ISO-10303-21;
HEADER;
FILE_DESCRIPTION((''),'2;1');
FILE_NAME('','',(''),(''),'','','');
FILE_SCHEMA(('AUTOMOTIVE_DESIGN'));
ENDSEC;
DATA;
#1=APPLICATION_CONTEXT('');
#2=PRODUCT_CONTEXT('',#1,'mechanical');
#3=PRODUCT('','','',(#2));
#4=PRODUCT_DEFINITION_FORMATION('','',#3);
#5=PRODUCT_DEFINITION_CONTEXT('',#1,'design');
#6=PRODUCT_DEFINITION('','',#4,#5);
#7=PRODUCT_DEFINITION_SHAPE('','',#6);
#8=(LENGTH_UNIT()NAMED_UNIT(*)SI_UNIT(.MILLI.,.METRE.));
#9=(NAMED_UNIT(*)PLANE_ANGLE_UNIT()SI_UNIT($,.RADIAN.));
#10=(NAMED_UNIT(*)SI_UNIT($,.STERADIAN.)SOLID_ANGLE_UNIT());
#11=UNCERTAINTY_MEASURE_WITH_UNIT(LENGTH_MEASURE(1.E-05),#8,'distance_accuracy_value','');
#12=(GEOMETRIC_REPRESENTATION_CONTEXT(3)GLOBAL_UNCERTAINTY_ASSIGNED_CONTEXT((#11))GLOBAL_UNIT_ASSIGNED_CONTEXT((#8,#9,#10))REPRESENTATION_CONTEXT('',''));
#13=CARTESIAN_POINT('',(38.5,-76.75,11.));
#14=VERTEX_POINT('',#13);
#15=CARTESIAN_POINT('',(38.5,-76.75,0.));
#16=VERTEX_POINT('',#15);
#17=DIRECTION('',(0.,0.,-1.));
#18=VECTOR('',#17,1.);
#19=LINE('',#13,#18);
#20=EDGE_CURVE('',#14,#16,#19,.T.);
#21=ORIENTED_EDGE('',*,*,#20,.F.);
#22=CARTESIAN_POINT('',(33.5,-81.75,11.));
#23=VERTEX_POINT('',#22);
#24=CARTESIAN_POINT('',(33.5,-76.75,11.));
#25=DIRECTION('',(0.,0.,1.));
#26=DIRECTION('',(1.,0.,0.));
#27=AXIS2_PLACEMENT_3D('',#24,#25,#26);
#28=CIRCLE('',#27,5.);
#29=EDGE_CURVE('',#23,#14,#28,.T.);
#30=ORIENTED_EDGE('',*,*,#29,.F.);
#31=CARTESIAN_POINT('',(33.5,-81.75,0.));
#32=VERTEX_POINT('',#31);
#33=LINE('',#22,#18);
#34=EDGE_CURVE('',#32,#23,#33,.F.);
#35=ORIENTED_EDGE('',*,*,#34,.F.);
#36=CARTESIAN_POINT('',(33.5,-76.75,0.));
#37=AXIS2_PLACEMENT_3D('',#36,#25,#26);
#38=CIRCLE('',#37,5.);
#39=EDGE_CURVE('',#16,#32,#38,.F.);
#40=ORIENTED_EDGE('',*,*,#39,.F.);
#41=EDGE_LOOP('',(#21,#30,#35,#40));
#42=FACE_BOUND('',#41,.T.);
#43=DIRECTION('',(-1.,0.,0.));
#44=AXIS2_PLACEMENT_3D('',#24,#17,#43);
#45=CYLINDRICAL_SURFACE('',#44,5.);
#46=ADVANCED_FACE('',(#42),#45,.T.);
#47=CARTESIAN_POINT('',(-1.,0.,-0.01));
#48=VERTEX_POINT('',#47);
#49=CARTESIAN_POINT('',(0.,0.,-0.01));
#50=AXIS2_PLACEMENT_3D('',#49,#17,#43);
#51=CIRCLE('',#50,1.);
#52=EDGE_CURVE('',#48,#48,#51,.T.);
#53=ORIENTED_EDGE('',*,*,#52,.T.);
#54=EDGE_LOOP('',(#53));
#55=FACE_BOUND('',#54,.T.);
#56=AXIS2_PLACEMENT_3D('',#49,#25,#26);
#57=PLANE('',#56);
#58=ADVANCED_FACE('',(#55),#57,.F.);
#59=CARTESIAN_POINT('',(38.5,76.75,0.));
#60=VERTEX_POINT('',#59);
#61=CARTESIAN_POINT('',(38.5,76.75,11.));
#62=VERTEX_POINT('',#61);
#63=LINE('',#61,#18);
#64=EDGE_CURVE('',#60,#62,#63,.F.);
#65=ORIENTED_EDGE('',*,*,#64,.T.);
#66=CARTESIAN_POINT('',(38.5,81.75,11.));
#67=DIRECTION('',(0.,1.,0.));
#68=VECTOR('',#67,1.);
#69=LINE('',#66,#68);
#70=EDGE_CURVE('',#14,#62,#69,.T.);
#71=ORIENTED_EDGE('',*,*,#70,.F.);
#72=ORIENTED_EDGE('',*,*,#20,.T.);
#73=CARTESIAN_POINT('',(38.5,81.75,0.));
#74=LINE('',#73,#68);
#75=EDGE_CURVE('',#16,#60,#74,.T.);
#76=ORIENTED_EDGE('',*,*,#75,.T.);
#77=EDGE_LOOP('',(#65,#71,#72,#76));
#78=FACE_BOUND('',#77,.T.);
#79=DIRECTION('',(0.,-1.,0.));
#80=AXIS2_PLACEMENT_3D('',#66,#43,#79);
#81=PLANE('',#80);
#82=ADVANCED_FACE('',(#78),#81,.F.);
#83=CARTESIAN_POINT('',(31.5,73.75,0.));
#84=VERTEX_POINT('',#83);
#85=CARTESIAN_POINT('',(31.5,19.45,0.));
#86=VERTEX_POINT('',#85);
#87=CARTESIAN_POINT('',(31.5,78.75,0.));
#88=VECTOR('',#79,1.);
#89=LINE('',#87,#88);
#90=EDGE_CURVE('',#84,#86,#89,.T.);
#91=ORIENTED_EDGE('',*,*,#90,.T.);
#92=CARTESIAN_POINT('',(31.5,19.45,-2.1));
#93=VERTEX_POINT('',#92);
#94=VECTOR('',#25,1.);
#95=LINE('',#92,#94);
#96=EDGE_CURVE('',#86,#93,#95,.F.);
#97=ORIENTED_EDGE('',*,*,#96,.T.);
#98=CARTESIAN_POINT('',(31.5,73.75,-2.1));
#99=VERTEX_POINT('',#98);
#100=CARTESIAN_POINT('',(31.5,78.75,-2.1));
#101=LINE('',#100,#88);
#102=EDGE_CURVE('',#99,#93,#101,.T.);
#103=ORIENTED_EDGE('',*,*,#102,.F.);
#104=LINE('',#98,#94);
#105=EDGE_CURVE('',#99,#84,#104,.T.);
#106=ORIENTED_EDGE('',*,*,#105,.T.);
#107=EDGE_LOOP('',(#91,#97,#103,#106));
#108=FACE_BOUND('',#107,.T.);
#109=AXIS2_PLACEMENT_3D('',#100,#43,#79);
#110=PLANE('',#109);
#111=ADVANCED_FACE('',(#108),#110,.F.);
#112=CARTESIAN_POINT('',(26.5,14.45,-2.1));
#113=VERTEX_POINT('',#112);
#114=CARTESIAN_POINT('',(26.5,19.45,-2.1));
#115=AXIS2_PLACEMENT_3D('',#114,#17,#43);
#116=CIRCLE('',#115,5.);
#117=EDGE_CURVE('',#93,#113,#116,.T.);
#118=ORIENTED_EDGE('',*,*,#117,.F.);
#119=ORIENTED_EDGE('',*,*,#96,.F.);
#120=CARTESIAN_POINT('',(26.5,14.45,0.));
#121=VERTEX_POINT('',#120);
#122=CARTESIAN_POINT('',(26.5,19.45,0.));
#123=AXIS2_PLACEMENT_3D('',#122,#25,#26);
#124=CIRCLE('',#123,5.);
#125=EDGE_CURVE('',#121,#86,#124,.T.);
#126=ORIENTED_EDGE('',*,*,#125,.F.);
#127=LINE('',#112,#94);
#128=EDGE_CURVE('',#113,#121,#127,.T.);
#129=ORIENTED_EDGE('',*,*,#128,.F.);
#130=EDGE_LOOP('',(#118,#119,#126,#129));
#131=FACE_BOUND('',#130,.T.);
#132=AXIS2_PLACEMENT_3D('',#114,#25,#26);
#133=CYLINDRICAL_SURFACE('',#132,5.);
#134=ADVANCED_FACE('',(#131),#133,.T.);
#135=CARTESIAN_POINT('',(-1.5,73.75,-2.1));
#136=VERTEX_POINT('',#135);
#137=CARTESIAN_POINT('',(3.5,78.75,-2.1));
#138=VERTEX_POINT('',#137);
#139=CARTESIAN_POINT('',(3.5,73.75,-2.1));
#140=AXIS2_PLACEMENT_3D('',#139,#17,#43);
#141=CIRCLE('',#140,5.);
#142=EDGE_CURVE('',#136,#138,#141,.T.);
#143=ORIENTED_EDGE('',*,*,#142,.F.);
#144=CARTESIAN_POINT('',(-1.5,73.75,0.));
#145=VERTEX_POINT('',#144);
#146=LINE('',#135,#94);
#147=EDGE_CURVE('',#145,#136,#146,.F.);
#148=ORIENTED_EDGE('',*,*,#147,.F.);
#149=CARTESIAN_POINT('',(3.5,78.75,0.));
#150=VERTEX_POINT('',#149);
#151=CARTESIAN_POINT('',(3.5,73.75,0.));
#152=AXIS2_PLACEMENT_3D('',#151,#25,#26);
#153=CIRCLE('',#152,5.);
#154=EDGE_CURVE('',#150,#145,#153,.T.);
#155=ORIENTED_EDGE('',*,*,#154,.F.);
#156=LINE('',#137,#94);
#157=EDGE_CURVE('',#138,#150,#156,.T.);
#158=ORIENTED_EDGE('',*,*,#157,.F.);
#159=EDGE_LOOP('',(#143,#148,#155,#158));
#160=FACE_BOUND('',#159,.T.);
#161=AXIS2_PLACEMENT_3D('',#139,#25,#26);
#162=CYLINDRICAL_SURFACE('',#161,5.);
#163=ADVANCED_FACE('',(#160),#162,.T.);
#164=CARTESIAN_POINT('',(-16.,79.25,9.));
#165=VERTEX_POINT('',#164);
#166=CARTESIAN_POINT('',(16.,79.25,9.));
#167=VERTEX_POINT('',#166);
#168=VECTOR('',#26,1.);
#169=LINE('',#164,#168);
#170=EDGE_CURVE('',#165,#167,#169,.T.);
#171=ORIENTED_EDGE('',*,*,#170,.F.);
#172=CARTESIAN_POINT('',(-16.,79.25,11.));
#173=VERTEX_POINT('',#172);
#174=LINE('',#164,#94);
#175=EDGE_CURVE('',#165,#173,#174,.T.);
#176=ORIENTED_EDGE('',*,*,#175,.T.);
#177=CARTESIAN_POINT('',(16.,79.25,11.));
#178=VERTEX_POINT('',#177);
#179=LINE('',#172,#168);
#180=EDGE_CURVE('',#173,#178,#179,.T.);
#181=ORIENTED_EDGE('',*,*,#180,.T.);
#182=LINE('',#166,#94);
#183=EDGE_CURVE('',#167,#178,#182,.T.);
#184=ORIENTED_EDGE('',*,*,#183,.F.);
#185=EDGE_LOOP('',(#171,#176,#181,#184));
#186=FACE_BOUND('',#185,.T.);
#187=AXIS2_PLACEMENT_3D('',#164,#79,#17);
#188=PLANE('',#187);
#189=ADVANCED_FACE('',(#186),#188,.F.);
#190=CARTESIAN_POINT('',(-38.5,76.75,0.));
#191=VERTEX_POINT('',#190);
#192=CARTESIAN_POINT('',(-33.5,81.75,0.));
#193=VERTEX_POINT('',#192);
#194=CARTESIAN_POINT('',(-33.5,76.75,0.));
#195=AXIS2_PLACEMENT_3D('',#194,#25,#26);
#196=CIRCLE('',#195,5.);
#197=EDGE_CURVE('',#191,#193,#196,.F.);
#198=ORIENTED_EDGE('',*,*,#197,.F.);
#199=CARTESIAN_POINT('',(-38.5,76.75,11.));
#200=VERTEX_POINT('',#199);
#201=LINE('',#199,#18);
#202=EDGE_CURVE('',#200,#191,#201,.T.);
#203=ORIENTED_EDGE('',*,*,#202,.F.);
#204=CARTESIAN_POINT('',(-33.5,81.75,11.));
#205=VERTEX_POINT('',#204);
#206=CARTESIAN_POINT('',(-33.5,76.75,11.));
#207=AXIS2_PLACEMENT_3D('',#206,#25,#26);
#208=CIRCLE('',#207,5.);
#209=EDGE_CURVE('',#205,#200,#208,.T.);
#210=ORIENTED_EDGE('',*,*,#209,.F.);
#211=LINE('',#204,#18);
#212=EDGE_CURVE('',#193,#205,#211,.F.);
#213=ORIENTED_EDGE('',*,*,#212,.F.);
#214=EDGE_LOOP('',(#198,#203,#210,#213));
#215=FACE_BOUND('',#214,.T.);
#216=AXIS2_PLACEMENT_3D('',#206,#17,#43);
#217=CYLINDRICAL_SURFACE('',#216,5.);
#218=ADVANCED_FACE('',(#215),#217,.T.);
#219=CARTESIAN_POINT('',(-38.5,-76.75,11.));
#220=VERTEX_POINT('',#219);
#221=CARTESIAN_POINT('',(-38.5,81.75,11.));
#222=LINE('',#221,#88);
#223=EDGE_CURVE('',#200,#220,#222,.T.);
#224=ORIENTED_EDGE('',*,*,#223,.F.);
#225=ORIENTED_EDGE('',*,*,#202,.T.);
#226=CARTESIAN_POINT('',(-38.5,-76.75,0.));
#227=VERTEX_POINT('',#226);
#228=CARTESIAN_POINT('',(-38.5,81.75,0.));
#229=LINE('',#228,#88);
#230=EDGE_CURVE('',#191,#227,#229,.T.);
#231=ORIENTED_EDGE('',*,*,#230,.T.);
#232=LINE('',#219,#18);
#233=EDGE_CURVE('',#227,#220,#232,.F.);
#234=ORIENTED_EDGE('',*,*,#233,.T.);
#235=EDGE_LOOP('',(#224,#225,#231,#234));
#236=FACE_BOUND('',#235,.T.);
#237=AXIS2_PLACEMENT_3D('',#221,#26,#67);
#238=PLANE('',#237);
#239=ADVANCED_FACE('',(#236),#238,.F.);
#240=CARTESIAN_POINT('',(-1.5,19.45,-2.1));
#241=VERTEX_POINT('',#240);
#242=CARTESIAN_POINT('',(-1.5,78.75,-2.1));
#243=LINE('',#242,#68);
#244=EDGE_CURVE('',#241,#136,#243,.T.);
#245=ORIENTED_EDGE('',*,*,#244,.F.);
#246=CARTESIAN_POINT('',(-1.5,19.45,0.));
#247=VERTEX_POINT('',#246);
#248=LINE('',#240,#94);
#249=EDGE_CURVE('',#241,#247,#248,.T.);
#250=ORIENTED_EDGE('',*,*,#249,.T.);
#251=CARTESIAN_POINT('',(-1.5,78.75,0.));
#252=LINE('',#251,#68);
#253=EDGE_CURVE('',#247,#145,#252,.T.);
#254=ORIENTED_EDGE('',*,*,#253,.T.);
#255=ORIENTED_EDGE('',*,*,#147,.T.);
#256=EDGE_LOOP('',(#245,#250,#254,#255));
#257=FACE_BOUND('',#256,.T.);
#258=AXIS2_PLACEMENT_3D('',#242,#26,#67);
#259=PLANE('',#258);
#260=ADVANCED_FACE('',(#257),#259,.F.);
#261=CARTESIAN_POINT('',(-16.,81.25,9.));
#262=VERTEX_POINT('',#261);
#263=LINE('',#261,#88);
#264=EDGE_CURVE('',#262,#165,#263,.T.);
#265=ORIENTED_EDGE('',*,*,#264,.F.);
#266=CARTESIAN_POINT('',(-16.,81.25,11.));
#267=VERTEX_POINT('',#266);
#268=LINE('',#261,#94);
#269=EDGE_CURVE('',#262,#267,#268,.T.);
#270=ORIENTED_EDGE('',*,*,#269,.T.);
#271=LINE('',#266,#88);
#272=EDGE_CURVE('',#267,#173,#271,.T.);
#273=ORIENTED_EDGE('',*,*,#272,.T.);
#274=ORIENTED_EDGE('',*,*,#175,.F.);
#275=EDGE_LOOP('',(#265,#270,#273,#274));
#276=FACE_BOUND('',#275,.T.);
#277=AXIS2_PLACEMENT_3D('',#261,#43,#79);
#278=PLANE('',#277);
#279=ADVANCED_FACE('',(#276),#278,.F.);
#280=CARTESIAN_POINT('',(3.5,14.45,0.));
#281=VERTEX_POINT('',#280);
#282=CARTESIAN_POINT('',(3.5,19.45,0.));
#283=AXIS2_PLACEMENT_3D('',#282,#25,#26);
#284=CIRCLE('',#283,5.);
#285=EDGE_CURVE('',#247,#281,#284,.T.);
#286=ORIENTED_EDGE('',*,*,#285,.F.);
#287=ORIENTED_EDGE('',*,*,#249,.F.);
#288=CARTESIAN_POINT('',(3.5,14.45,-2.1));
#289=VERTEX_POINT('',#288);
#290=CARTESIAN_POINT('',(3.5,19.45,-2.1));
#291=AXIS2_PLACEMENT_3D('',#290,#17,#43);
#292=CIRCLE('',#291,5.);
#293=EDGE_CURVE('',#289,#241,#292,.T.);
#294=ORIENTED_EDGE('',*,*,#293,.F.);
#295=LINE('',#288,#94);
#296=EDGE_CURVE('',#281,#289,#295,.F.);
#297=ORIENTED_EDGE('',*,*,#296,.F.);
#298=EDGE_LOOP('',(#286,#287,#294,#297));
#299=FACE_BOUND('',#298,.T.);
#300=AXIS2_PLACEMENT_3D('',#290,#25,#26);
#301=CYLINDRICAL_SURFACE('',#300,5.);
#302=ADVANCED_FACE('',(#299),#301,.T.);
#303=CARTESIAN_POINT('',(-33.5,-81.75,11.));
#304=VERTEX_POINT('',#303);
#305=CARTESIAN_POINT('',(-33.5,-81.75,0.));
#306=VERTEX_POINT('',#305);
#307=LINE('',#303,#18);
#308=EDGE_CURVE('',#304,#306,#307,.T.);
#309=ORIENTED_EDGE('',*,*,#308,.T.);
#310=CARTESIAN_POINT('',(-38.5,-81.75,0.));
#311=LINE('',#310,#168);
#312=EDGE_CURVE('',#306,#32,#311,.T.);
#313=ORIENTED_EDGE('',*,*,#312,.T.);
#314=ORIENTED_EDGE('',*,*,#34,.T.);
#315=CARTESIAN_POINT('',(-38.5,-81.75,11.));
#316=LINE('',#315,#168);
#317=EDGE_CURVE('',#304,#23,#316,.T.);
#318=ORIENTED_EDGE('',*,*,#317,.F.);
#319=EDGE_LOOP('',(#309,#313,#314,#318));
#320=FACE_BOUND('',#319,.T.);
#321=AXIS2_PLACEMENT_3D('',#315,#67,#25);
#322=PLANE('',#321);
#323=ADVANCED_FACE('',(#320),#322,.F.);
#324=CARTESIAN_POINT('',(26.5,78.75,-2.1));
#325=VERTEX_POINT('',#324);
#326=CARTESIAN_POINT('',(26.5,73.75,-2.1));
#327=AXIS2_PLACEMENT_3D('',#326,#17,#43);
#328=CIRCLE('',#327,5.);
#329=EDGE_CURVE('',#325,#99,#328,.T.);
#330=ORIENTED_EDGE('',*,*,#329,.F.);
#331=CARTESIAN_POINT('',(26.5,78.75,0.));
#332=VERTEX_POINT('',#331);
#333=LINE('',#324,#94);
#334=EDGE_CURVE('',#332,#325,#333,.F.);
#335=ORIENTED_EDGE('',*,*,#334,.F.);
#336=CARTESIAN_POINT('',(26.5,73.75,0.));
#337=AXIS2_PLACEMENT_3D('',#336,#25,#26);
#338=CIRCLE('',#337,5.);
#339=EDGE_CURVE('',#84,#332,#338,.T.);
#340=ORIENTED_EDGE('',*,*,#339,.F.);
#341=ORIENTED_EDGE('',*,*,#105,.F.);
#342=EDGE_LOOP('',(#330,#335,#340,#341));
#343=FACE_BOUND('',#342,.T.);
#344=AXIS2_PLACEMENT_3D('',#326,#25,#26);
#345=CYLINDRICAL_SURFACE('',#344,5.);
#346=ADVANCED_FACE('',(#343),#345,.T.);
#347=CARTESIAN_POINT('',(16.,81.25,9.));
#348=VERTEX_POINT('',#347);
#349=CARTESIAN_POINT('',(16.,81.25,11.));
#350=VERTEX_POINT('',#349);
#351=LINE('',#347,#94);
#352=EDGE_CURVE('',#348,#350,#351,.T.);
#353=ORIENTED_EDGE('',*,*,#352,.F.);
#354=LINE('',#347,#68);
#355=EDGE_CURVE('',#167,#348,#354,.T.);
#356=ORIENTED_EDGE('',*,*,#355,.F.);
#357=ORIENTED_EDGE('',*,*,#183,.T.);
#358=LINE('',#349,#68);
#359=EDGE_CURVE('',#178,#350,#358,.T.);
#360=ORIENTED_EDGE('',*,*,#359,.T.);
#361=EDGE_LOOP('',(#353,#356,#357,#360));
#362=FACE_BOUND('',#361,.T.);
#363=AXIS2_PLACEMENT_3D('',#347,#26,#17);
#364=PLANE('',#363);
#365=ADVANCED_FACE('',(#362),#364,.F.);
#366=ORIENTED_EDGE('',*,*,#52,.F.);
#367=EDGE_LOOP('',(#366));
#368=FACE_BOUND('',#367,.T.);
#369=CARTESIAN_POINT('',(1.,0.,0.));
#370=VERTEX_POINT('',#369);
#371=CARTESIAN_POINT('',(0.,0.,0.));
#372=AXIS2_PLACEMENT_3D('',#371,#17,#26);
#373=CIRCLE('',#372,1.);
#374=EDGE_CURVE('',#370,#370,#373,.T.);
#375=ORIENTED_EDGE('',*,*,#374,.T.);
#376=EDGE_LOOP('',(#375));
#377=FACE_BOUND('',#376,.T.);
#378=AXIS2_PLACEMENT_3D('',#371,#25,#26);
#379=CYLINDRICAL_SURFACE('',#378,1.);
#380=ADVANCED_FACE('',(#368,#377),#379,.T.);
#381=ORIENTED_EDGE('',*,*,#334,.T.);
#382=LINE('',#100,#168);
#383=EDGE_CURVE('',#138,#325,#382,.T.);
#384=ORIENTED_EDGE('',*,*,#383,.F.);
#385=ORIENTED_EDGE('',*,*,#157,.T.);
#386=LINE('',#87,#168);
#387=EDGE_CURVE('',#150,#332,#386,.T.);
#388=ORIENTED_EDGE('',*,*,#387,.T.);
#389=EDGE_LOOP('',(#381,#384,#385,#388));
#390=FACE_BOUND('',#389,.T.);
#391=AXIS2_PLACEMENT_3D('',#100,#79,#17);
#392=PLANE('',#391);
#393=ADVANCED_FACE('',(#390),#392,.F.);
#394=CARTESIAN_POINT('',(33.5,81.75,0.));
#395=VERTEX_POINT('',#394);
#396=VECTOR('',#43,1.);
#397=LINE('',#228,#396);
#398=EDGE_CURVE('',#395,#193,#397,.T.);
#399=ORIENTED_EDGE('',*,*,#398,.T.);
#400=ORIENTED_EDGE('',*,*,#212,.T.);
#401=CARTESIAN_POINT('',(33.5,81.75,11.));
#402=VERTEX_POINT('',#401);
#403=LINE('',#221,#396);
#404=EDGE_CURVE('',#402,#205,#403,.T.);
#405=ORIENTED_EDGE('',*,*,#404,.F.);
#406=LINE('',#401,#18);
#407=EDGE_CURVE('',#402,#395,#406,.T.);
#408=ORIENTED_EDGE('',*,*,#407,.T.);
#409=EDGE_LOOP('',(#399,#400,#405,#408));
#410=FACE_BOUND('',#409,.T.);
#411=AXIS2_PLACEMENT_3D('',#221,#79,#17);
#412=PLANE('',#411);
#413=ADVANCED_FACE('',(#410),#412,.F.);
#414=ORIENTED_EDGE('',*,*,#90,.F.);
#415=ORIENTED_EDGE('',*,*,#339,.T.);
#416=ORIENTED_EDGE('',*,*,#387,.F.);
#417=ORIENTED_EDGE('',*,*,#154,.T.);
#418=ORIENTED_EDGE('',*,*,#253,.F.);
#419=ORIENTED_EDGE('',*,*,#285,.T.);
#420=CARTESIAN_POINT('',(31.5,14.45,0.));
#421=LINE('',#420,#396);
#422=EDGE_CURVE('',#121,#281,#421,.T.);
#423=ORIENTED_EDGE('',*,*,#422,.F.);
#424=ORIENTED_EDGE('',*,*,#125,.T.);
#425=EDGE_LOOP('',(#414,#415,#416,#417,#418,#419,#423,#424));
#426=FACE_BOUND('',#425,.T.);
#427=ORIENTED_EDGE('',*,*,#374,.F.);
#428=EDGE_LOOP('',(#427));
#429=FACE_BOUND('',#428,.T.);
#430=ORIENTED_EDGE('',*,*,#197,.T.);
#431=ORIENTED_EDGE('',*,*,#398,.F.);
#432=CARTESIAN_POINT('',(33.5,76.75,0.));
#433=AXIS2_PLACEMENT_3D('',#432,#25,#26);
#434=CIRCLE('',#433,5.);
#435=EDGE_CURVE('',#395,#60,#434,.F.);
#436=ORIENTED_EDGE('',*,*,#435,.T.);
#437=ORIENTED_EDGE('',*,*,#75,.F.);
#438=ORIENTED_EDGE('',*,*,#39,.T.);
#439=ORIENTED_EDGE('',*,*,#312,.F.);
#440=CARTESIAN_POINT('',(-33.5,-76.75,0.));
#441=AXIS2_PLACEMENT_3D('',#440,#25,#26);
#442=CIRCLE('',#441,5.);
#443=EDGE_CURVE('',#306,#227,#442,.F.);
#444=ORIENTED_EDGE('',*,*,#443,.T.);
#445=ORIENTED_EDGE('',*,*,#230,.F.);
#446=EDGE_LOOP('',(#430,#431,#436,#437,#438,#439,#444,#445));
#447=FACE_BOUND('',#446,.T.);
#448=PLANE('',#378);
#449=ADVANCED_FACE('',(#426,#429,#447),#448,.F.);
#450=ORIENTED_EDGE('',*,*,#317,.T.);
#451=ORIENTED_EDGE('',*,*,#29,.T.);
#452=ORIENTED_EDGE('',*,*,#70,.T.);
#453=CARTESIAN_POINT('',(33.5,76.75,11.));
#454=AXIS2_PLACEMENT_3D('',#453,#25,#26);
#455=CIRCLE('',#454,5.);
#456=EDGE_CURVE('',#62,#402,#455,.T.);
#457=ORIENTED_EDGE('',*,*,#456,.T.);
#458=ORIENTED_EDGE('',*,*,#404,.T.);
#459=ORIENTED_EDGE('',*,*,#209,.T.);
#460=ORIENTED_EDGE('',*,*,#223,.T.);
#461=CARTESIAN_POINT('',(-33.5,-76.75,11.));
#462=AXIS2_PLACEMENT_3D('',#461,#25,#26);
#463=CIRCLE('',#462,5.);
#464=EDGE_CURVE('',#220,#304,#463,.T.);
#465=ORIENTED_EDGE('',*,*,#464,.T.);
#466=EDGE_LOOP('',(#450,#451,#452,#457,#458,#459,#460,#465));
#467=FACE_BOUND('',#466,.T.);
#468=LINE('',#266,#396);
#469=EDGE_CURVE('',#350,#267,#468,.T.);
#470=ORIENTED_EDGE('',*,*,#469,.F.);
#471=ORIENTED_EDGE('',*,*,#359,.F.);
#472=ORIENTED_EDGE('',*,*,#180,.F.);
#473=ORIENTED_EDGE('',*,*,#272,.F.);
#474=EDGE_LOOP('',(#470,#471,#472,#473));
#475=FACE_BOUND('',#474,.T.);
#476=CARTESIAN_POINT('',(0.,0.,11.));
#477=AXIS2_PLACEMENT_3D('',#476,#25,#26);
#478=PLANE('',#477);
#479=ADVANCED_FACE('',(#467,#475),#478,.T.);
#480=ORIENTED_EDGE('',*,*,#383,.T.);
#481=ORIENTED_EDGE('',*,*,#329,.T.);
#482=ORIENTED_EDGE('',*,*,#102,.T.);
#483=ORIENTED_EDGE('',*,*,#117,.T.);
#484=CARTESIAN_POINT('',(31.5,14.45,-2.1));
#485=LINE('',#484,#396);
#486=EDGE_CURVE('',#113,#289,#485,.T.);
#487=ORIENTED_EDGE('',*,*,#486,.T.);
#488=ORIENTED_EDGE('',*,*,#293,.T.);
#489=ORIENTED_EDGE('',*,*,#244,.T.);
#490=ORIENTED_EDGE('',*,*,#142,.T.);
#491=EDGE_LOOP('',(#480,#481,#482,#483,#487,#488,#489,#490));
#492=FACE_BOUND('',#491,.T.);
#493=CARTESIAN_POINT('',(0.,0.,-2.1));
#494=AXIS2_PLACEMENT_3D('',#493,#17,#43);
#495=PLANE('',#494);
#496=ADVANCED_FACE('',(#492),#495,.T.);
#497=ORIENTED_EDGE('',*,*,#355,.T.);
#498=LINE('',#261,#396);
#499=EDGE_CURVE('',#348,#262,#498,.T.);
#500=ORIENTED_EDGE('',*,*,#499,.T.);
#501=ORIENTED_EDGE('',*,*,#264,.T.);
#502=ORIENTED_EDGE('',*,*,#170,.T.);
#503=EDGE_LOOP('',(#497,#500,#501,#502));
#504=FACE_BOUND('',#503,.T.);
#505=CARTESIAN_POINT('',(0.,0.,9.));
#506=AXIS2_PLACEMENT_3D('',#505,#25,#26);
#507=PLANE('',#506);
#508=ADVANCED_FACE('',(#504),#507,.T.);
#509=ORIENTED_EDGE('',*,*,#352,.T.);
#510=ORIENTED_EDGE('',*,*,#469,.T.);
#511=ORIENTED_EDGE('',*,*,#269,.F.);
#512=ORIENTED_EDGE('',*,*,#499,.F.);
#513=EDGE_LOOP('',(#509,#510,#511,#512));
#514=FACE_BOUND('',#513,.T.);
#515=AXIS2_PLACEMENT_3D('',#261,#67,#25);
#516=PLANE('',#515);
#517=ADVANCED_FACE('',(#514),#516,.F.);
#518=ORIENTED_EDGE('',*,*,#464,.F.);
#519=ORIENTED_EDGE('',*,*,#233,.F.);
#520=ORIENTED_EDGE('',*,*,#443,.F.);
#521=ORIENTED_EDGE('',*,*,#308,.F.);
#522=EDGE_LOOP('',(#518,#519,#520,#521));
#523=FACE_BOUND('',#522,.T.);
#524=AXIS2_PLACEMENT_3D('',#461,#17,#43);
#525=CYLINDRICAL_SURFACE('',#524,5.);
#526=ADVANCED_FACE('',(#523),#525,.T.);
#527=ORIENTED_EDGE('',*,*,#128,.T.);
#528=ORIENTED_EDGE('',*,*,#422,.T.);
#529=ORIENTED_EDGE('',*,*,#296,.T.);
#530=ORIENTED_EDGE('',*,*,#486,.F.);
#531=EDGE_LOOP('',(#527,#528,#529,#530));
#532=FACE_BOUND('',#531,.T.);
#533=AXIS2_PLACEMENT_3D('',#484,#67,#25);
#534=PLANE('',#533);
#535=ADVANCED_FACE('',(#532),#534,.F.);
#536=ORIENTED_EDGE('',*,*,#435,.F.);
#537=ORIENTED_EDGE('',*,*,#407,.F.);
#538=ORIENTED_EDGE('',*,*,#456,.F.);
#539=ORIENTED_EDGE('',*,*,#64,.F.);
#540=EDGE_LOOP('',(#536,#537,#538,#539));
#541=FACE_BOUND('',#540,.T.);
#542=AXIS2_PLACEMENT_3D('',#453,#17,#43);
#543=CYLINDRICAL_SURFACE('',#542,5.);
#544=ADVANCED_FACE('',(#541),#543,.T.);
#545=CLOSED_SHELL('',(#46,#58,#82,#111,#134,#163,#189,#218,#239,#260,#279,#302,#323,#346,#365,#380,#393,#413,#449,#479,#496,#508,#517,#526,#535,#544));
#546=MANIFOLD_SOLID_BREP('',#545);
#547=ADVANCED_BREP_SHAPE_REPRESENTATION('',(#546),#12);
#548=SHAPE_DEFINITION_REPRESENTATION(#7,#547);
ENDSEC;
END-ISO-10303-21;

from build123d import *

# Parameters (mm, degrees)
SKETCH_1_W          = 77
SKETCH_1_H          = 163.5
EXTRUDE_1_DEPTH     = 11
SKETCH_2_W          = 33
SKETCH_2_H          = 64.3
EXTRUDE_2_DEPTH     = 2.1
FILLET_1_R          = 5
FILLET_2_R          = 5
SKETCH_3_W          = 32
SKETCH_3_H          = 2
CUT_EXTRUDE_1_DEPTH = 2
WRAP_1_OUTLINE_R    = 1
WRAP_1_DEPTH        = 0.01


# Read off the part's stored shape, not the designer's step: 包覆1
with BuildPart() as part:
    # 草图1 → 凸台-拉伸1 (new body)
    with BuildSketch(Plane.XY):
        Rectangle(SKETCH_1_W, SKETCH_1_H)
    extrude(amount=EXTRUDE_1_DEPTH)

    # 草图2 → 凸台-拉伸2 (add)
    with BuildSketch(Plane(origin=(0, 0, 0), x_dir=(-1, 0, 0), z_dir=(0, 0, -1))):
        with Locations((-15, 46.6)):
            Rectangle(SKETCH_2_W, SKETCH_2_H)
    extrude(amount=EXTRUDE_2_DEPTH)

    # 圆角1
    fillet_1_edges = [part.edges().sort_by_distance(p)[0] for p in [
        (31.5, 78.75, -1.05),
        (31.5, 14.45, -1.05),
        (-1.5, 14.45, -1.05),
        (-1.5, 78.75, -1.05),
    ]]
    fillet(fillet_1_edges, radius=FILLET_1_R)

    # 圆角2
    fillet_2_edges = [part.edges().sort_by_distance(p)[0] for p in [
        (38.5, -81.75, 5.5),
        (-38.5, -81.75, 5.5),
        (-38.5, 81.75, 5.5),
        (38.5, 81.75, 5.5),
    ]]
    fillet(fillet_2_edges, radius=FILLET_2_R)

    # 草图3 → 切除-拉伸1 (cut)
    with BuildSketch(Plane.XY.offset(11)):
        with Locations((0, 80.25)):
            Rectangle(SKETCH_3_W, SKETCH_3_H)
    extrude(amount=-CUT_EXTRUDE_1_DEPTH, mode=Mode.SUBTRACT)

    # 包覆1 outline → 包覆1 (add)
    with BuildSketch(Plane(origin=(0, 0, 0), x_dir=(-1, 0, 0), z_dir=(0, 0, -1))):
        Circle(WRAP_1_OUTLINE_R)
    extrude(amount=WRAP_1_DEPTH)


solid = part.part
